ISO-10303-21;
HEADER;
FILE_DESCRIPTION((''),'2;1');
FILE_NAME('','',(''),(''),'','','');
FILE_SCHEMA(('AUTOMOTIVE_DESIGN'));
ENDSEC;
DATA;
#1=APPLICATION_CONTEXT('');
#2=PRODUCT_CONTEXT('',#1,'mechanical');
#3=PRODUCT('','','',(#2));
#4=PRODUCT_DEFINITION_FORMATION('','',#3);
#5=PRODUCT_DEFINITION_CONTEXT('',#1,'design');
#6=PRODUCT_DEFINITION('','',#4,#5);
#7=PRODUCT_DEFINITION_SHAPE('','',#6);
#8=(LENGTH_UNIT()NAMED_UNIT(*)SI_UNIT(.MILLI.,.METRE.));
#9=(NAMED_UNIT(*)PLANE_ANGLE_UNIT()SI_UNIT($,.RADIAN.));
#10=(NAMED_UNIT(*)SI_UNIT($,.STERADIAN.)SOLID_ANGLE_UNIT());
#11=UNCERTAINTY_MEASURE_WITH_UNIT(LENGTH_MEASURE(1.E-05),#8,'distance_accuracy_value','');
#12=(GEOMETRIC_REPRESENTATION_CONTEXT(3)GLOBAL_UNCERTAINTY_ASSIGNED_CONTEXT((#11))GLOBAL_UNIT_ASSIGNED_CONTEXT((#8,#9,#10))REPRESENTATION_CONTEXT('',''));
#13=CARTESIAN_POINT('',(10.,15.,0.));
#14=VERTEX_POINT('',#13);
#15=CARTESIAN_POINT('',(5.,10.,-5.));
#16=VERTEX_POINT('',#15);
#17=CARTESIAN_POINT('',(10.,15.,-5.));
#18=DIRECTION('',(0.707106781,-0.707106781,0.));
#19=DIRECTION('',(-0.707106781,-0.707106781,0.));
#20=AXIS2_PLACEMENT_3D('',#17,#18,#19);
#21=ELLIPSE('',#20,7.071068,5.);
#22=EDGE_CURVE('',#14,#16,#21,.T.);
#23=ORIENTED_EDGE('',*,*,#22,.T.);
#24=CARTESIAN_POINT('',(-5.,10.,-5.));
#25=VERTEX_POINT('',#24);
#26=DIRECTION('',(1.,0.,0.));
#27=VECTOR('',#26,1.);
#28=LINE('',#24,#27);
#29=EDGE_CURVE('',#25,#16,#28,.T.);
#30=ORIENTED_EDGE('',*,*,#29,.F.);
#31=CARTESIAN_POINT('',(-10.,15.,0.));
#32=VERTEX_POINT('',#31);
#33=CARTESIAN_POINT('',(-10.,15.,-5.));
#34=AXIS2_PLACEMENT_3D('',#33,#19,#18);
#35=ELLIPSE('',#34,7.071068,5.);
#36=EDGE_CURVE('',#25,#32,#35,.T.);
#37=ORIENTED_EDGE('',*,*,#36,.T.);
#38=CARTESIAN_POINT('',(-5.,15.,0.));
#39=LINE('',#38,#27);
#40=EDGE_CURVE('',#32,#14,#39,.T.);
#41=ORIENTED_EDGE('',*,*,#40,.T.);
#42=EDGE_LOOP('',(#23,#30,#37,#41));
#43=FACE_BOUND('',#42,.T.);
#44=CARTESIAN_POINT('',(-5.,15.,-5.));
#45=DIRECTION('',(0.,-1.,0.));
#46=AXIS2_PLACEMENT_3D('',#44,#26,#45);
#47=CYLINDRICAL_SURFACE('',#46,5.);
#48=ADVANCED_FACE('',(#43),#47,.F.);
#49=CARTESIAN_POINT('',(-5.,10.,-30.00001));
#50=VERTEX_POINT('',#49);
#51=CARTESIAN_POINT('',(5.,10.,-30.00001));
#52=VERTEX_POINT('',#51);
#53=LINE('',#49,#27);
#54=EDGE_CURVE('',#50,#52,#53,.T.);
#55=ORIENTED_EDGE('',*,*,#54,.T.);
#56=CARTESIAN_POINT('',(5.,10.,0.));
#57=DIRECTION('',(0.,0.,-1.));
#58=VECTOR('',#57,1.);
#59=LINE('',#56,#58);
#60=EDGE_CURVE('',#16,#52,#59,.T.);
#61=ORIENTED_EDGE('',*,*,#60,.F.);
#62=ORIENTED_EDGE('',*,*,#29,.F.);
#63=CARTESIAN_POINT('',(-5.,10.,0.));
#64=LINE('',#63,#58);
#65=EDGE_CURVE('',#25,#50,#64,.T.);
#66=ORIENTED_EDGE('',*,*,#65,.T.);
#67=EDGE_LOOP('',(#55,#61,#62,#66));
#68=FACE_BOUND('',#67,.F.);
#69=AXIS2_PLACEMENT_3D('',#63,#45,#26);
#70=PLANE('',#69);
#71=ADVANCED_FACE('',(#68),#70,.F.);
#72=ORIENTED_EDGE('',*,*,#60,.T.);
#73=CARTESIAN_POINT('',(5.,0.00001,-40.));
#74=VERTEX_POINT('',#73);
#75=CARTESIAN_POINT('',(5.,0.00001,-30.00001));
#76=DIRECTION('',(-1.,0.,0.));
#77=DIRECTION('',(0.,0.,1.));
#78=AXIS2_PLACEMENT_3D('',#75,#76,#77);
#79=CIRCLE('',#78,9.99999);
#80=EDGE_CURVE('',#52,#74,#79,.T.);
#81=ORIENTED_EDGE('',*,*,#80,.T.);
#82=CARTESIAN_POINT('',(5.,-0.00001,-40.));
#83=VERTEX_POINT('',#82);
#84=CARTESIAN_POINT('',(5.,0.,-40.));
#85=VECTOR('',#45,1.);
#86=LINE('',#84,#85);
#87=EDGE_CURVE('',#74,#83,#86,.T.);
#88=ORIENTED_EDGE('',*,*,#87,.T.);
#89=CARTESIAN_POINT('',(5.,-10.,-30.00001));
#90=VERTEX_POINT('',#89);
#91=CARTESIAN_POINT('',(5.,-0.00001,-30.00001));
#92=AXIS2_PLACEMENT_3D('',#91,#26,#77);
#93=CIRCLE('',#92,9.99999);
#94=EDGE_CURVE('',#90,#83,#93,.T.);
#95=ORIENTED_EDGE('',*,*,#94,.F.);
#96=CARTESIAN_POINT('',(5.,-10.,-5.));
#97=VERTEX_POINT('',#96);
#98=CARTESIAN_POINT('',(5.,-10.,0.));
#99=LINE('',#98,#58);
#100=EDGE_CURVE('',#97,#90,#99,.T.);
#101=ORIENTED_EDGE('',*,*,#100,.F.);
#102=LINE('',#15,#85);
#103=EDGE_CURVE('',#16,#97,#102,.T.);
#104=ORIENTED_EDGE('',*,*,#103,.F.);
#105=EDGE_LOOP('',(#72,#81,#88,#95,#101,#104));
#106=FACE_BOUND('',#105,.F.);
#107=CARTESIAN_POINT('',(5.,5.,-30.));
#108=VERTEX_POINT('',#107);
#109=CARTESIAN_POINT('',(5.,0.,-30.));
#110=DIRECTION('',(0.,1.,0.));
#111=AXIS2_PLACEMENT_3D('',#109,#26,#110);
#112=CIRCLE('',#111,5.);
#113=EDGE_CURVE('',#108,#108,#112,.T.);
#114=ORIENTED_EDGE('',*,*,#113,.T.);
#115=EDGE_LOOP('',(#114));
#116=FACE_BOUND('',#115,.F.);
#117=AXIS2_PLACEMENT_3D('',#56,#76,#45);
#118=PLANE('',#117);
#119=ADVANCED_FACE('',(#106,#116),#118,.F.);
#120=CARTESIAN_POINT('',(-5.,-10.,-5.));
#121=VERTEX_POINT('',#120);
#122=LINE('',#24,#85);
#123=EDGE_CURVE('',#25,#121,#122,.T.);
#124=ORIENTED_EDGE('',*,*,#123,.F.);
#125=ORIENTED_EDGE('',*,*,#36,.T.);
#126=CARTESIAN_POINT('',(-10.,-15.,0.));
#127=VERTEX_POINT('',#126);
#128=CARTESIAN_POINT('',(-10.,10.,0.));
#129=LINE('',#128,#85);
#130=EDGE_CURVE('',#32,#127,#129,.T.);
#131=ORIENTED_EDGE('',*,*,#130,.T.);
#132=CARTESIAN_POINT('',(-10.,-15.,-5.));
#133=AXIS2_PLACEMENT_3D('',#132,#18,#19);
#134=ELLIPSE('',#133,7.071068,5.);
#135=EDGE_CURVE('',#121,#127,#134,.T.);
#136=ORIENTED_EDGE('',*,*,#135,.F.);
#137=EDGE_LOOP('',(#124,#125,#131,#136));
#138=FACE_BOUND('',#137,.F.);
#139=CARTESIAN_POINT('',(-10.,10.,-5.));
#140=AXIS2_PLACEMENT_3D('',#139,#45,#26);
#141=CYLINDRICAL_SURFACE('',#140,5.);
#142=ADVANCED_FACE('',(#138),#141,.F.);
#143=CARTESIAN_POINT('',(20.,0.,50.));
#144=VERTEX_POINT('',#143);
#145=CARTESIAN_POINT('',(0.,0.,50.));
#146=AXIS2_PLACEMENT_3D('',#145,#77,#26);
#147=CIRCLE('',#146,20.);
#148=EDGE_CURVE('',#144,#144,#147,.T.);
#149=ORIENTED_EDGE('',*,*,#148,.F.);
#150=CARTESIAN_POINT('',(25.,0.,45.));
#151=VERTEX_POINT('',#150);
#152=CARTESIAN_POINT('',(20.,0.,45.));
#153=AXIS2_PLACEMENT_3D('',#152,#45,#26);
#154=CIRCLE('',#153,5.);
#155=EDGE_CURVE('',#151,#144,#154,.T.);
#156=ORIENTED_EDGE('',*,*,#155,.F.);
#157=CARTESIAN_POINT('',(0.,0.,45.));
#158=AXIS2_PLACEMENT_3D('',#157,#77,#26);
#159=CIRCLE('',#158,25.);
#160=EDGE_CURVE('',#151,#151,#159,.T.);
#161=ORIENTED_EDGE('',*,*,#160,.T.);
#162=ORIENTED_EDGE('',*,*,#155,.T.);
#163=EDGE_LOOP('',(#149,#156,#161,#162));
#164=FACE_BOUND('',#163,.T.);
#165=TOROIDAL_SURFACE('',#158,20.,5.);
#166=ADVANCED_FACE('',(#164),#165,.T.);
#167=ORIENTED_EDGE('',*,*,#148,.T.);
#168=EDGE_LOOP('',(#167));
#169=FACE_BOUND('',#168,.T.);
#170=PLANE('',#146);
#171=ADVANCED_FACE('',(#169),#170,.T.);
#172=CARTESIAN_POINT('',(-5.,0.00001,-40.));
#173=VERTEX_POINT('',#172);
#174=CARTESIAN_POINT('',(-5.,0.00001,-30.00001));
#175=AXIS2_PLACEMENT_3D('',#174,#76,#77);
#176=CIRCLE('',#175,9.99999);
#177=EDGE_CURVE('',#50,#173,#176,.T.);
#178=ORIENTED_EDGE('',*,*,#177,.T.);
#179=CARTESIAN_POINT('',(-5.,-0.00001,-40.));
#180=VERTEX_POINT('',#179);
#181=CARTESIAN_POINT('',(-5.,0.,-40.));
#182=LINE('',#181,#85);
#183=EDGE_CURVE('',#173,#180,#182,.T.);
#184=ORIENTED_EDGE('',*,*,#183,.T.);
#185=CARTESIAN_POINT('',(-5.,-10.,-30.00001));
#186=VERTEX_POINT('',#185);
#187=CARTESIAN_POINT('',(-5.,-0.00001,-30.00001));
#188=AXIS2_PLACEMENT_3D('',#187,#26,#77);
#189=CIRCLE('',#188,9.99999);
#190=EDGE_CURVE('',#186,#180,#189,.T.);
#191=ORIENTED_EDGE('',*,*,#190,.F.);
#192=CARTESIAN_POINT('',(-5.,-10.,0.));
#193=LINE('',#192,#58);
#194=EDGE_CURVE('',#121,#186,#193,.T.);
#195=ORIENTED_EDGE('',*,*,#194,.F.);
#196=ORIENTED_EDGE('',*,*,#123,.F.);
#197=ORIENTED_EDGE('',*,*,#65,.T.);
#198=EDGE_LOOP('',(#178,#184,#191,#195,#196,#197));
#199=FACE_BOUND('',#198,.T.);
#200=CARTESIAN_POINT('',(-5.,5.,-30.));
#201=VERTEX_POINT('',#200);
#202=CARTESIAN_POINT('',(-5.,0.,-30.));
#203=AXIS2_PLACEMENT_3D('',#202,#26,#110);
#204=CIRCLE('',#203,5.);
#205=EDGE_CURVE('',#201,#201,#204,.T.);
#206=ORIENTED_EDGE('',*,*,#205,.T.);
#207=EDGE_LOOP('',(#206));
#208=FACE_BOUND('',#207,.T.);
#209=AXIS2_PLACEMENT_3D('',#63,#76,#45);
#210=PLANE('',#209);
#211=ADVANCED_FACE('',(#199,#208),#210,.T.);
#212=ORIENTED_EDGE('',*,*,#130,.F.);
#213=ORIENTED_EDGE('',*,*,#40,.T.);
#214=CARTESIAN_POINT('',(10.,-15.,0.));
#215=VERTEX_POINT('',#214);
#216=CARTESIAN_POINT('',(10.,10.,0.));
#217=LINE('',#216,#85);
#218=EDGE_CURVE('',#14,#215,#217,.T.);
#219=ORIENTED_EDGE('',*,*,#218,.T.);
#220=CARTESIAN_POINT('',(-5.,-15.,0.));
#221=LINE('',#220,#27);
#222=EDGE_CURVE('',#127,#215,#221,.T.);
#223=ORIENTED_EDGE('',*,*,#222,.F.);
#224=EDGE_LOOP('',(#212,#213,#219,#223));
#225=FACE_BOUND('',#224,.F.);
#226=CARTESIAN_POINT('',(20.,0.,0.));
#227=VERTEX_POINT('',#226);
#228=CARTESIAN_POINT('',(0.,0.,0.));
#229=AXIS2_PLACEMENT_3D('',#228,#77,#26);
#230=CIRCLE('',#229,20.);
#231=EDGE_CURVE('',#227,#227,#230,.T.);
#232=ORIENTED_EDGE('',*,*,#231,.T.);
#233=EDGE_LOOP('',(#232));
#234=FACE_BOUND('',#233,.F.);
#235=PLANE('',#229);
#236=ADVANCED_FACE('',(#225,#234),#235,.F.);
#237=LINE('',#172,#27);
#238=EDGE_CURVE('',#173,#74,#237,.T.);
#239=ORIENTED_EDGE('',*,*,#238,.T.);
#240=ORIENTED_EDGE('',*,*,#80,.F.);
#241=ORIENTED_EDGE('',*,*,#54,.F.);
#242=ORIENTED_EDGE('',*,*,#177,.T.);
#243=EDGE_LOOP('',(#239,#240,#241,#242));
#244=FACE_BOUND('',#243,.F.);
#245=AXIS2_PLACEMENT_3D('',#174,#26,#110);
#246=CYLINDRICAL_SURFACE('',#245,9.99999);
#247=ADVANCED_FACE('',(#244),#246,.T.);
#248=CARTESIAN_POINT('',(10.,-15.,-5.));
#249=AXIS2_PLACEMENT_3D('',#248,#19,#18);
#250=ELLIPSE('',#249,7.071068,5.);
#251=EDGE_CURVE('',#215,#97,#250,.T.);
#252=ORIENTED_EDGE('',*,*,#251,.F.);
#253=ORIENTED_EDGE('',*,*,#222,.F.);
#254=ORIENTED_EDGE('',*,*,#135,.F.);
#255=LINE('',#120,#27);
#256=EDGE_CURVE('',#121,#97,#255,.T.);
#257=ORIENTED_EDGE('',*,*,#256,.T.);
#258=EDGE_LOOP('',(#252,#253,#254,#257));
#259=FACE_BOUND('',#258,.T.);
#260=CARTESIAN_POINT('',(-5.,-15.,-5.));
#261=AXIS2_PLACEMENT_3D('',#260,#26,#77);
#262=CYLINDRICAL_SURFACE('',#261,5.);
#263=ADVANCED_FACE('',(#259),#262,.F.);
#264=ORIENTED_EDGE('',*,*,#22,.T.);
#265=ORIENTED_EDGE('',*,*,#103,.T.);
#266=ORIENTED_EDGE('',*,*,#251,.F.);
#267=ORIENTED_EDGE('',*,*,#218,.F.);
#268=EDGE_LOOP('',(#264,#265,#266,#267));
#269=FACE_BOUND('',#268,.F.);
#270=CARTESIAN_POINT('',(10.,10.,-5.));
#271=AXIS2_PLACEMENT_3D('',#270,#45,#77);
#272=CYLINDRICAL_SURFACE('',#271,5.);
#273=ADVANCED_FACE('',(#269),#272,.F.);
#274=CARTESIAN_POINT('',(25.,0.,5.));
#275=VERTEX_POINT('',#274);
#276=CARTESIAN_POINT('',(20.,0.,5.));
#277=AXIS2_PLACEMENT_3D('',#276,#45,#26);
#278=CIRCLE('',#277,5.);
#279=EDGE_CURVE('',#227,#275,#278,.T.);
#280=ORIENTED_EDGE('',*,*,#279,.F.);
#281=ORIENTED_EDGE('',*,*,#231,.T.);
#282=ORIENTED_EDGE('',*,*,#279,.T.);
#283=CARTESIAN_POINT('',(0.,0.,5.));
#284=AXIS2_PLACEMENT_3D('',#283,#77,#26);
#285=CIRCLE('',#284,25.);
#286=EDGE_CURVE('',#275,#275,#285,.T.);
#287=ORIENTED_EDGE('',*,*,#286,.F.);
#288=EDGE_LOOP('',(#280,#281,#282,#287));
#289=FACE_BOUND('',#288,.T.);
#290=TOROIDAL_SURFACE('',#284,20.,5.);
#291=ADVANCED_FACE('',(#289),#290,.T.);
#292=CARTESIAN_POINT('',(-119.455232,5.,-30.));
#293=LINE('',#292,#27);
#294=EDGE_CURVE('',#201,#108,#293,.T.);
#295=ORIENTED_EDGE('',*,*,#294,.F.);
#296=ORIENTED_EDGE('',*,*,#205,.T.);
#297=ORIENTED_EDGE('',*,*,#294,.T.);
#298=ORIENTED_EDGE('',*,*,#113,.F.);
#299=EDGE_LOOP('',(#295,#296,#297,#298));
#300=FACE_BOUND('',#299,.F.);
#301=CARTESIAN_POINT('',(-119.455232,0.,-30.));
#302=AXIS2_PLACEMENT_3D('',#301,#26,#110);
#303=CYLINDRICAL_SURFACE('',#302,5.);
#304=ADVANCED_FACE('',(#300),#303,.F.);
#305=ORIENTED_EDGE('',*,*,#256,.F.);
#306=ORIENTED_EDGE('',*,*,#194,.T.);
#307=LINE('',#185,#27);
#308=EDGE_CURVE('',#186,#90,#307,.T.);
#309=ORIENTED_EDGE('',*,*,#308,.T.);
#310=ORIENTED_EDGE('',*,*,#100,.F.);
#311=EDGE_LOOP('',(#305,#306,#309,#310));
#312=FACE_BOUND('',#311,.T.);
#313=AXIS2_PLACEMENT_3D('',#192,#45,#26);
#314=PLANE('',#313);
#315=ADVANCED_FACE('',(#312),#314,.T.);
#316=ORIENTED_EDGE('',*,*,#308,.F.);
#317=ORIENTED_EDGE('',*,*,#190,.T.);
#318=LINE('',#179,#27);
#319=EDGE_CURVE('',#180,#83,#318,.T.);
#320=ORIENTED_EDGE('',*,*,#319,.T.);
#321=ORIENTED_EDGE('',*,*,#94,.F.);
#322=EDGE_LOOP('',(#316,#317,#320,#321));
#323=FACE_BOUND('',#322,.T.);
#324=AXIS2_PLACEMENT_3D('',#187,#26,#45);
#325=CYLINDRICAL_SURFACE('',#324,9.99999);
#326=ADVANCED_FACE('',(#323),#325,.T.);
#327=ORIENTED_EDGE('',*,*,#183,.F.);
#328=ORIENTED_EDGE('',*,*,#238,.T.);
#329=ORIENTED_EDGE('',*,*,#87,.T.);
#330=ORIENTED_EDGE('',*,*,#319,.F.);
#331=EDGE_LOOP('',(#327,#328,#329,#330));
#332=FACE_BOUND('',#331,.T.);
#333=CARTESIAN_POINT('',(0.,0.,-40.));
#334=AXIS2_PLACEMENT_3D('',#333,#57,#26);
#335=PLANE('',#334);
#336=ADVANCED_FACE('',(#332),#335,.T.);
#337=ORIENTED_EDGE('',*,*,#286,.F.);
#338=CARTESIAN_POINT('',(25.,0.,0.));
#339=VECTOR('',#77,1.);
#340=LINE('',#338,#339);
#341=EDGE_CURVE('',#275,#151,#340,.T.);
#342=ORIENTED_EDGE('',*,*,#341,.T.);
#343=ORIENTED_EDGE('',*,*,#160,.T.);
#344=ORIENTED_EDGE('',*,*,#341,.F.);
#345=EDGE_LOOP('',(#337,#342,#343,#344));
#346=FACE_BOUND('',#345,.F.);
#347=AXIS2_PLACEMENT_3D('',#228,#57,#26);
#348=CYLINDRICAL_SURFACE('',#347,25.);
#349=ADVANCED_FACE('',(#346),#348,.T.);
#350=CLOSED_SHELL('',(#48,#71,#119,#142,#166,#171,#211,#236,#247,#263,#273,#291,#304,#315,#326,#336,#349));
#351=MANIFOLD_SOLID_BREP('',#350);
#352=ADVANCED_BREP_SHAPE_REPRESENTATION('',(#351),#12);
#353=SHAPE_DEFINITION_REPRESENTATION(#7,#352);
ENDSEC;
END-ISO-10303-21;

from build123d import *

# Parameters (mm, degrees)
F0_R     = 25
F1_DEPTH = 50
F2_W     = 10
F2_H     = 20
F3_DEPTH = 40
F6_R     = 9.99999
F7_R     = 5
F5_D     = 10


# Not quite as in the source:
# - a fillet or chamfer is up to 0.001 mm smaller than in the source, because OpenCascade refuses the exact size


with BuildPart() as f1:
    # F0 (on Top) → F1 (new body)
    with BuildSketch(Plane.XY):
        Circle(F0_R)
    extrude(amount=F1_DEPTH)

    # F2 (on face) → F3 (join)
    with BuildSketch(Plane(origin=(0, 0, 0), x_dir=(1, 0, 0), z_dir=(0, 0, -1))):
        Rectangle(F2_W, F2_H)
    extrude(amount=F3_DEPTH)

    # F6 (radius 10 in the source; OpenCascade refuses exactly that, so slightly less here)
    f6_edges = [f1.edges().sort_by_distance(p)[0] for p in [
        (0, 10, -40),
        (0, -10, -40),
    ]]
    fillet(f6_edges, radius=F6_R)

    # F7
    f7_edges = [f1.edges().sort_by_distance(p)[0] for p in [
        (-25, 0, 50),
        (-25, 0, 0),
        (-5, 0, 0),
        (0, -10, 0),
        (5, 0, 0),
        (0, 10, 0),
    ]]
    fillet(f7_edges, radius=F7_R)

    # F5 (through all)
    with Locations(Plane(origin=(-5, 0, 0), x_dir=(0, -1, 0), z_dir=(-1, 0, 0))):
        with Locations((0, -30)):
            Hole(F5_D / 2)


solid = f1.part
